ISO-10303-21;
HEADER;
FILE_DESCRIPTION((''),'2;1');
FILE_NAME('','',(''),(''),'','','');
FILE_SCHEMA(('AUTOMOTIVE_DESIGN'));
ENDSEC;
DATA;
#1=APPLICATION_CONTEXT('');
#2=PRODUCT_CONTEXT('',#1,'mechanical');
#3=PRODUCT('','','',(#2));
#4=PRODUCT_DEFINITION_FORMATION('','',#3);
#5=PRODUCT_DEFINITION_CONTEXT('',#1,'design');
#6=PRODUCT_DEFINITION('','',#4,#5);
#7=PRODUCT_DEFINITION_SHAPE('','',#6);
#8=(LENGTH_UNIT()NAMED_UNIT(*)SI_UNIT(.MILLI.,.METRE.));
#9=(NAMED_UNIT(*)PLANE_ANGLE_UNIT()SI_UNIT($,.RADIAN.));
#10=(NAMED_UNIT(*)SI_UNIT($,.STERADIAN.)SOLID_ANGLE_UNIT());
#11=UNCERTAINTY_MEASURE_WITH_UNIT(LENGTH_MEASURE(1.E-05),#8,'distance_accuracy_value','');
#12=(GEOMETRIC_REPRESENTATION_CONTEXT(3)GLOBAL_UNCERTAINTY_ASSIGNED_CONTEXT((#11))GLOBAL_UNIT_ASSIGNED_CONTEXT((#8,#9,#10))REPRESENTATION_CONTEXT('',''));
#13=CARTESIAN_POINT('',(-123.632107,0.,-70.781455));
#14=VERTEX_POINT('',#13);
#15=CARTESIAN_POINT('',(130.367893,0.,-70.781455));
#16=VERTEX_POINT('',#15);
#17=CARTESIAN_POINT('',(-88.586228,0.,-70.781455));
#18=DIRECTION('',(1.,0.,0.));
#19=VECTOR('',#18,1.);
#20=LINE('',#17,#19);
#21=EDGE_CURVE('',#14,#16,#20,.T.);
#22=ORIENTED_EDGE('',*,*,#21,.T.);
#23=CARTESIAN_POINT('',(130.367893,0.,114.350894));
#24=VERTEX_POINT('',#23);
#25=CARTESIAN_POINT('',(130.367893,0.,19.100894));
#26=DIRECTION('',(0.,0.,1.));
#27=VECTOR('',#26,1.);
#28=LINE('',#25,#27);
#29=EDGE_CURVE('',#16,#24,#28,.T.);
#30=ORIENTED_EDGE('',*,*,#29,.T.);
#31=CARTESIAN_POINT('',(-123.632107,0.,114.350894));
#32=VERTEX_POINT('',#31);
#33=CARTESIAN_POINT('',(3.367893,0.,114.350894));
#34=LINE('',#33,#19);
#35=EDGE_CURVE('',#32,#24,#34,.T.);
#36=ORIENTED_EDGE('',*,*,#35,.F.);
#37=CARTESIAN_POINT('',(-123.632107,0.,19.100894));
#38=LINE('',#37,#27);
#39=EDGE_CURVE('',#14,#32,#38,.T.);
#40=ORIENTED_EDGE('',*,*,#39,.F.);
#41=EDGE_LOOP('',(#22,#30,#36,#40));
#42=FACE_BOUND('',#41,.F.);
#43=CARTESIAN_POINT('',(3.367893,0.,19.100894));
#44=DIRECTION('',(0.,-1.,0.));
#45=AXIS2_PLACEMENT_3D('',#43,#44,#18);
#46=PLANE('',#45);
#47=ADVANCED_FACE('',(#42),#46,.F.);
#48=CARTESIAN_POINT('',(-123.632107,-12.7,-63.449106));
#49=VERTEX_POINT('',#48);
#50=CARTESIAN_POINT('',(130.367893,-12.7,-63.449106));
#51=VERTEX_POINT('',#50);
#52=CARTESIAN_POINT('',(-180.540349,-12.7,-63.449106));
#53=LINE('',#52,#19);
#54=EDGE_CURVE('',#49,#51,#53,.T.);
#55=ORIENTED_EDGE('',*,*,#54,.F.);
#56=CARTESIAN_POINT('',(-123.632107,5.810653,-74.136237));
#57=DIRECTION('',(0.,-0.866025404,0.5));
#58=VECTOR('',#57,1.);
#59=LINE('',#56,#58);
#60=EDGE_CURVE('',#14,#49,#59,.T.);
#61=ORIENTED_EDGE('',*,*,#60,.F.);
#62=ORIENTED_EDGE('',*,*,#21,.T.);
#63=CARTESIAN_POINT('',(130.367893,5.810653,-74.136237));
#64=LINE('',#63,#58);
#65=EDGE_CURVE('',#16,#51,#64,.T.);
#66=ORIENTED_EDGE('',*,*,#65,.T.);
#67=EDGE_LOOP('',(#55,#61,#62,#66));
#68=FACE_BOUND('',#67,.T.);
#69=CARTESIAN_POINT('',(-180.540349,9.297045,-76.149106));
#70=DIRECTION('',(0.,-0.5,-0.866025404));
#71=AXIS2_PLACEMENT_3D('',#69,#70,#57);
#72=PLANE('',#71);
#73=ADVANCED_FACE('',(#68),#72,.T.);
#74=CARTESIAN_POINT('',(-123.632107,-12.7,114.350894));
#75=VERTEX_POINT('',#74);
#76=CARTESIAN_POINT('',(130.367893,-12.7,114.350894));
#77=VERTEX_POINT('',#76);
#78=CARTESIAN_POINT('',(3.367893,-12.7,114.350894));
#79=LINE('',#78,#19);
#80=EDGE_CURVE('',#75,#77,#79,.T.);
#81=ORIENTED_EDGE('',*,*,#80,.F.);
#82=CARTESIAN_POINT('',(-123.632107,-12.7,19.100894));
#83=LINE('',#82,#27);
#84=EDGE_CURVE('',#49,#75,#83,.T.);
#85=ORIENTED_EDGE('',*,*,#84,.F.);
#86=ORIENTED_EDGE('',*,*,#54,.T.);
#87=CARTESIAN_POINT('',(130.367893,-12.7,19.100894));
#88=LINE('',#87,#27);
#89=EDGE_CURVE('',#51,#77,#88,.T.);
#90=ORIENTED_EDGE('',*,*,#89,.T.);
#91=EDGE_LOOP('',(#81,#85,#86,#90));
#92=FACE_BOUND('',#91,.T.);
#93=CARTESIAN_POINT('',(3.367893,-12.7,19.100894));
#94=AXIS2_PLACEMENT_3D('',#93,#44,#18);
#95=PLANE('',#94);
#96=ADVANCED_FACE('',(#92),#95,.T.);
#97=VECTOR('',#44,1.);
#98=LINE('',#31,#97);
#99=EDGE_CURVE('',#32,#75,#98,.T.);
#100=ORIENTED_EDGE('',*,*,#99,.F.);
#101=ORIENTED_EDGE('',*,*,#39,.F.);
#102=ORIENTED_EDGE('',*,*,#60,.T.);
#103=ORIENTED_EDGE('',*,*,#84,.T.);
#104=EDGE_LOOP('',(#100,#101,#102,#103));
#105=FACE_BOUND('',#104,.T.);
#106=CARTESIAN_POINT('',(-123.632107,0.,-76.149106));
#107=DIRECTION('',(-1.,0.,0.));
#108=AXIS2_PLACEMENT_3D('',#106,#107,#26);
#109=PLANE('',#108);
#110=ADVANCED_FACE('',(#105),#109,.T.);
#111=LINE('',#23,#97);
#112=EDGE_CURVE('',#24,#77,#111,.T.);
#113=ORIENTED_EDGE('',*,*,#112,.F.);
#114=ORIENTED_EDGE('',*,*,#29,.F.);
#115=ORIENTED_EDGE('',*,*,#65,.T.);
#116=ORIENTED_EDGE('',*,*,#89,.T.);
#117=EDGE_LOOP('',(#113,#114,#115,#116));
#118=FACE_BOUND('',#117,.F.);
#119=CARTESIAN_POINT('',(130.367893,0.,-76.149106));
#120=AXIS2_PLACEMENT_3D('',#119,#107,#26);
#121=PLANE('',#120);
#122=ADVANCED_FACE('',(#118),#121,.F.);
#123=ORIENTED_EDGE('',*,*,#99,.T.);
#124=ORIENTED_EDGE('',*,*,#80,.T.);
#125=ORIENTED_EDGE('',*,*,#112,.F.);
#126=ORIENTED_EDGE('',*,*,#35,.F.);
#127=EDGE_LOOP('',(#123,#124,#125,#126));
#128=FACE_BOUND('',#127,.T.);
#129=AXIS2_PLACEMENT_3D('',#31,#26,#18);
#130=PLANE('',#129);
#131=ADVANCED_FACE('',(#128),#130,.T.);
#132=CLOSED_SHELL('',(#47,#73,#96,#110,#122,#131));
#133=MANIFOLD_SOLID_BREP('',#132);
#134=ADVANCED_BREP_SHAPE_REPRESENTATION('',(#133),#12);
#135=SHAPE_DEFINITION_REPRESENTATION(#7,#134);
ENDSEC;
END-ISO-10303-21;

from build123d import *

# Parameters (mm, degrees)
F0_W        = 254
F0_H        = 190.5
F1_DEPTH    = 12.7
F2_T1_DEPTH = 367.8164848528


# Not quite as in the source:
# - a fillet or chamfer that OpenCascade refuses, or shapes differently, is made with other operations: its cross-section is extruded or revolved along the edge and cut away or added


with BuildPart() as f1:
    # F0 (on Front) → F1 (new body)
    with BuildSketch(Plane.XZ):
        with Locations((3.3678933978, 19.1008937233)):
            Rectangle(F0_W, F0_H)
    extrude(amount=F1_DEPTH)

    # F2: chamfer of 12.7 x 21.9970452561 on 1 edges, made by hand

    # F2_s2 → F2_t1 (cut)
    with BuildSketch(Plane.YZ.offset(-180.5403490286)):
        Polygon((9.2970452561, -76.1491062767), (-12.7, -63.4491062767), (-12.7, -76.1491062767), align=None)
    extrude(amount=F2_T1_DEPTH, mode=Mode.SUBTRACT)


solid = f1.part
